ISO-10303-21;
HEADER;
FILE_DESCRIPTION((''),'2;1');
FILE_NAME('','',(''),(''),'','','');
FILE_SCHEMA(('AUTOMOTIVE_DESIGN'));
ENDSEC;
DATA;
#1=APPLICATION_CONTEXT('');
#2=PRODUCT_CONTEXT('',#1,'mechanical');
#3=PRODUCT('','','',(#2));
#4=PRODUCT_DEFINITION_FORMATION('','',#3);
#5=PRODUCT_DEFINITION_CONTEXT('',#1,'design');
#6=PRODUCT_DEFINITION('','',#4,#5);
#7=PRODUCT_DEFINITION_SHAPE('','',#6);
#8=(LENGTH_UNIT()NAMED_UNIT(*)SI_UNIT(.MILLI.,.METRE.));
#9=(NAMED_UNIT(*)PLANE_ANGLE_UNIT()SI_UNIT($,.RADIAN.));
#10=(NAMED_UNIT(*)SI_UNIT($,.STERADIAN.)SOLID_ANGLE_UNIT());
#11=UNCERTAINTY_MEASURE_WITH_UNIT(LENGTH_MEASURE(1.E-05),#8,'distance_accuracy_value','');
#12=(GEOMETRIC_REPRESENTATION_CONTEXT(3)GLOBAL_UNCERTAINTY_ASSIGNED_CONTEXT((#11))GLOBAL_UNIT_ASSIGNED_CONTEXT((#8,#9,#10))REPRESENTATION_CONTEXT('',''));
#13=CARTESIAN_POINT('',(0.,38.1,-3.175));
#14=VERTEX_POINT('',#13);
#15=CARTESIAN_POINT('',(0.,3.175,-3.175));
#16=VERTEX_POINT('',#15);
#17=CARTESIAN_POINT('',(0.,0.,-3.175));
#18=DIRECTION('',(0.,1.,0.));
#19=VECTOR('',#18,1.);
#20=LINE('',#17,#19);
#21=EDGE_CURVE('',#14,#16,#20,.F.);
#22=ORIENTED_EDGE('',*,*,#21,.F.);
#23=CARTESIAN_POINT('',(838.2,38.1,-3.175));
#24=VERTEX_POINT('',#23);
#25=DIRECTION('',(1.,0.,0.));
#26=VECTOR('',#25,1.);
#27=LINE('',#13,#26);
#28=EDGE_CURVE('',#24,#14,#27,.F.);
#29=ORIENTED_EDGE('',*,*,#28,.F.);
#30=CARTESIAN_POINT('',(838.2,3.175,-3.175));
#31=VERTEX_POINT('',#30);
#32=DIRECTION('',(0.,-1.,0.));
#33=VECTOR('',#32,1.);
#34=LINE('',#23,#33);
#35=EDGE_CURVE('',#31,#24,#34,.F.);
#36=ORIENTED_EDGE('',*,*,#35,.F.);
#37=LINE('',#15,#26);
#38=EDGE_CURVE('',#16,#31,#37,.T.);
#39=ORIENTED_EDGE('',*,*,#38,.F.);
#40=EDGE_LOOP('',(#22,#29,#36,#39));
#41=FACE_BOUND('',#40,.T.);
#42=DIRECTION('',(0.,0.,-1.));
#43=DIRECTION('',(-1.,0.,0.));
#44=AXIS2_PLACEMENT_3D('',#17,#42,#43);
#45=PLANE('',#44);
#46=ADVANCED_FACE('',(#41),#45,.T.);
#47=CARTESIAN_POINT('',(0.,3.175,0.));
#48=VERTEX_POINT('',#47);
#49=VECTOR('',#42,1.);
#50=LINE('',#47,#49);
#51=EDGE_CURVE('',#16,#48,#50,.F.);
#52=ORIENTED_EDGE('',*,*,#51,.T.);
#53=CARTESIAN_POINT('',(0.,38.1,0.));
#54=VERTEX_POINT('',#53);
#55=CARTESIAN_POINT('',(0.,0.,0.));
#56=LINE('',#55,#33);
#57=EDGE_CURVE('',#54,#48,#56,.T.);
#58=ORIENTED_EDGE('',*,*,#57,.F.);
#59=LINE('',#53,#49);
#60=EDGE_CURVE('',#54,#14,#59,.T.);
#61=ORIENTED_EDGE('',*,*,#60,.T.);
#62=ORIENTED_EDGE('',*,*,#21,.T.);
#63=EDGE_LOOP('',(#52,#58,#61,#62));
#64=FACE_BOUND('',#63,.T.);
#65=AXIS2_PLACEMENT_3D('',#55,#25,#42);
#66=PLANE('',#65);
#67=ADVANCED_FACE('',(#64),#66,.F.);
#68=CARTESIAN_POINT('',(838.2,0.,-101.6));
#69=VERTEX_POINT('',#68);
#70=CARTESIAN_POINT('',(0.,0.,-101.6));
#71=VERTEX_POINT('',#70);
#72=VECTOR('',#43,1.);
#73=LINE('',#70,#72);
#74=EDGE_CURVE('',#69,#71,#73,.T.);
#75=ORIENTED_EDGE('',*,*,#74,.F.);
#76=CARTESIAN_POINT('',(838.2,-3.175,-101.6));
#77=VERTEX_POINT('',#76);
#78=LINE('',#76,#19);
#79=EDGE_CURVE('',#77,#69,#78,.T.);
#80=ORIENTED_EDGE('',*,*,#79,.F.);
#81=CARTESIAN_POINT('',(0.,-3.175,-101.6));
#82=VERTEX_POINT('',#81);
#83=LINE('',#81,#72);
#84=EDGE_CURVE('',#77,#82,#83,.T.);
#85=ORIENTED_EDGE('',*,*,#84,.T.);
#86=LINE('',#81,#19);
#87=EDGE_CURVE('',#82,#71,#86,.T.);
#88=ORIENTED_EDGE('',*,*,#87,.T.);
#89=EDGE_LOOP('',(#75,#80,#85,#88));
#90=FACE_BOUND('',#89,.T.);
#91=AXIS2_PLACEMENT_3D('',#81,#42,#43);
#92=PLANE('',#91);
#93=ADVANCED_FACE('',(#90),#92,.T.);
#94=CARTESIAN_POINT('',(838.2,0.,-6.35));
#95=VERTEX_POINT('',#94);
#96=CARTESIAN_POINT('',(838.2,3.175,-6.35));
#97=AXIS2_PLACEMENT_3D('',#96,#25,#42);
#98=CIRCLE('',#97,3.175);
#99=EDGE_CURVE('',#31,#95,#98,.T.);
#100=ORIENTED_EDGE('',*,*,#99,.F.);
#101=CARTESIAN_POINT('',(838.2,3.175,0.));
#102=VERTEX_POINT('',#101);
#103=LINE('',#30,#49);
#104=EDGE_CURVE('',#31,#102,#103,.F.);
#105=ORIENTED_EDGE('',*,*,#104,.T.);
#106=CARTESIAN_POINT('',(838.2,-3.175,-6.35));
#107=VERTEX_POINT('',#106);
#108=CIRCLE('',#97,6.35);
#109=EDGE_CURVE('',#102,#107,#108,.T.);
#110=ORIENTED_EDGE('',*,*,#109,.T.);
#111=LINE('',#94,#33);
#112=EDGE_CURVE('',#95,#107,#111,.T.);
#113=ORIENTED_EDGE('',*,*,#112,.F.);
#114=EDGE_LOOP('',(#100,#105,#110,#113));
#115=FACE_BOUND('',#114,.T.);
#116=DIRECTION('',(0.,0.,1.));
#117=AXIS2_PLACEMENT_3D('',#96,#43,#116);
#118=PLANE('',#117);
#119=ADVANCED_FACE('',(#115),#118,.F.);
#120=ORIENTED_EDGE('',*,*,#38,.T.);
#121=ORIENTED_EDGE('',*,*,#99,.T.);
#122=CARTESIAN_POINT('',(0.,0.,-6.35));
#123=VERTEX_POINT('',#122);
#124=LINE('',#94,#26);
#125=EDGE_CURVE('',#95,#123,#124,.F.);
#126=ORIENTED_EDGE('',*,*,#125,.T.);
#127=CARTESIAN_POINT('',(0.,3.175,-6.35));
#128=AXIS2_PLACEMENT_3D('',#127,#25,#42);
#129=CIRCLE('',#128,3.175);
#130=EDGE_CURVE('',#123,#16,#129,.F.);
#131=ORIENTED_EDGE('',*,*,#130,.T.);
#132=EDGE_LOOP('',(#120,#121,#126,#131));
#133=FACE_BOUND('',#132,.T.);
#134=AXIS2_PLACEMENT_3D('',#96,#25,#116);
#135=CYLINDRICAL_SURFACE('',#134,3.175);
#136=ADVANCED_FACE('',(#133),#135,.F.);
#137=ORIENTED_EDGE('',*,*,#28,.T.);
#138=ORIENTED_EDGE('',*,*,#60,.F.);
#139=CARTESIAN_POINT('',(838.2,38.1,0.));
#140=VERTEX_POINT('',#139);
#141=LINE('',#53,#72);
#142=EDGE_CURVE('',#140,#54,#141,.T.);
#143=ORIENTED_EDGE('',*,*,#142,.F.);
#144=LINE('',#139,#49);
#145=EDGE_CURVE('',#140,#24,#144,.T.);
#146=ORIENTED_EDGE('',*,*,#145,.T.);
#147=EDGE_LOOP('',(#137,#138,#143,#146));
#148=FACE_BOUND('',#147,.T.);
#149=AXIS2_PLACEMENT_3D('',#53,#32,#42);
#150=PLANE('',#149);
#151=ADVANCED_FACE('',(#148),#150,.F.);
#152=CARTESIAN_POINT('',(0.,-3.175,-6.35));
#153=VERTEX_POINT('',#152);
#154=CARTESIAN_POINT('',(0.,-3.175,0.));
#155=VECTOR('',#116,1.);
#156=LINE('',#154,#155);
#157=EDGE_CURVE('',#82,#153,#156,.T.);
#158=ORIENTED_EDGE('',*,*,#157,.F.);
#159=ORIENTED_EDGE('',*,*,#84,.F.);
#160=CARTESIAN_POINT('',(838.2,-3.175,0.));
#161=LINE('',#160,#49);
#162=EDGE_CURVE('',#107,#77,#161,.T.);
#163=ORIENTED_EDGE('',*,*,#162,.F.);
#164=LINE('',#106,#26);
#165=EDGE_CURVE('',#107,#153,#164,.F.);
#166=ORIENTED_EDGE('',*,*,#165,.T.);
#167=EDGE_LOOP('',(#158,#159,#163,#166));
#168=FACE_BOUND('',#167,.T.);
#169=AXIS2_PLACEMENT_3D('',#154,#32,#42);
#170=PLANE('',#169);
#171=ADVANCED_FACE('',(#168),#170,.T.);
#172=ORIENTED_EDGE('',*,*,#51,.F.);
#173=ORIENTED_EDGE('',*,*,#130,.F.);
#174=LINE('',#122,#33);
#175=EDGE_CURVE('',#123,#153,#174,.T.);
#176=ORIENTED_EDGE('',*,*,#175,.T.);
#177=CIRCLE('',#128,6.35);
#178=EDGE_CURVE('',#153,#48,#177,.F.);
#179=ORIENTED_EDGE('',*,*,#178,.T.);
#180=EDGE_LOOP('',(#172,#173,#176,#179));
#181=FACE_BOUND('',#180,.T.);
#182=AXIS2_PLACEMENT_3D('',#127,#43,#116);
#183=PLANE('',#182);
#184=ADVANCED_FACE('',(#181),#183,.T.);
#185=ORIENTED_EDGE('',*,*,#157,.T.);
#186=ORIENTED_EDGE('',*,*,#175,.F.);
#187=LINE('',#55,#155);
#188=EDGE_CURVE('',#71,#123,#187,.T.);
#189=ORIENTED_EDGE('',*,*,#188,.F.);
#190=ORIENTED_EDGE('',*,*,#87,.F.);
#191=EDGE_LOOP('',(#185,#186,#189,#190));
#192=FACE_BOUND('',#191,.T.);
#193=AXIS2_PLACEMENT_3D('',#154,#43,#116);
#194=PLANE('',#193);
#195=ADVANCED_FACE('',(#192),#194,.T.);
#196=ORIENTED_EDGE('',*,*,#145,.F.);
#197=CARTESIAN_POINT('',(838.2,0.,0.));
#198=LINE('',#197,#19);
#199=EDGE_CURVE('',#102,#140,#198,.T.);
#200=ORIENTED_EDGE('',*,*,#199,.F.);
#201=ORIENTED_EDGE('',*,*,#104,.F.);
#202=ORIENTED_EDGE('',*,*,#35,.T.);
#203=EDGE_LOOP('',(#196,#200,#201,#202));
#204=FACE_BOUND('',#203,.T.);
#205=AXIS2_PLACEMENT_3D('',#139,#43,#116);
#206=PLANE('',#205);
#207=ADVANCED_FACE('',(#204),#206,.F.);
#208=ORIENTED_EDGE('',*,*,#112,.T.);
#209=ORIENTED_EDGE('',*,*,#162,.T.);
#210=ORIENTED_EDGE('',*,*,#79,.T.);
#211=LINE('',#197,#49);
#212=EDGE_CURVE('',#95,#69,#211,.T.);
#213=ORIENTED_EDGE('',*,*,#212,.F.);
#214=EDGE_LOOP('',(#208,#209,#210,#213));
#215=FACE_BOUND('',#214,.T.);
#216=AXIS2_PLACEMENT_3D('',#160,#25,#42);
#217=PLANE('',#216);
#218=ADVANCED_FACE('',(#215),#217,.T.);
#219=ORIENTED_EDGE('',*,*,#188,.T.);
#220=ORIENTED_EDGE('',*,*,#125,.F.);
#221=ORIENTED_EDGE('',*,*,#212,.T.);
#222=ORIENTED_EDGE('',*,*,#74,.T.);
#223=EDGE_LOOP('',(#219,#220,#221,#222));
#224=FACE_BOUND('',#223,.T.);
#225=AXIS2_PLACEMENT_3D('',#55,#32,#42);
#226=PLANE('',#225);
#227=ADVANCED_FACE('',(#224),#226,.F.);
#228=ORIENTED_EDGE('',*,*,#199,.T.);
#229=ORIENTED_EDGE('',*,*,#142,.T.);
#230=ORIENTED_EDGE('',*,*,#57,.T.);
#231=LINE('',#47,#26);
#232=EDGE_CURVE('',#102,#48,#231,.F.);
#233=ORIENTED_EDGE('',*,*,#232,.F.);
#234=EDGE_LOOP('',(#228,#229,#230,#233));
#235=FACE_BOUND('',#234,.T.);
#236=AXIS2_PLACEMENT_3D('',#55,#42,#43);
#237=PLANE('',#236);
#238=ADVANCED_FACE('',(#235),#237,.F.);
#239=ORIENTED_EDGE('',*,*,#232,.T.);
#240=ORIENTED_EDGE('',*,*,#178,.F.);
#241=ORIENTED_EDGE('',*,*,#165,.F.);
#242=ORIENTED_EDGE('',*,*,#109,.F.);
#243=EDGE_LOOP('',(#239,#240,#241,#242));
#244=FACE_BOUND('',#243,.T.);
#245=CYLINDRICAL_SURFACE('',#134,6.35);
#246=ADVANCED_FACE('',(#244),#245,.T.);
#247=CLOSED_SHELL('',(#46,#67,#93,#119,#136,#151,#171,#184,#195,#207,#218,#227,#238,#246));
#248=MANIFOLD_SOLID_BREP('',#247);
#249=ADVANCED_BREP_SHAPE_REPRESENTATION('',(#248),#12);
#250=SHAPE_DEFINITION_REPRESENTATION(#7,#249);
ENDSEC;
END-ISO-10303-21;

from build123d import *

# Parameters (mm, degrees)
SKETCH1_W                    = 838.2
SKETCH1_H                    = 101.6
BASE_FLANGE1_DEPTH           = 3.175
EDGE_FLANGE1_STRIP_W         = 19.05
EDGE_FLANGE1_STRIP_H         = 3.175
EDGE_FLANGE1_STRIP_CUT_DEPTH = 838.2
EDGE_FLANGE1_DEPTH           = 838.2


# Sheet-metal steps are written as plain solids
with BuildPart() as part:
    # Sketch1 → Base-Flange1 (new body)
    with BuildSketch(Plane(origin=(0, 0, 0), x_dir=(1, 0, 0), z_dir=(0, 1, 0))):
        with Locations((419.1, 50.8)):
            Rectangle(SKETCH1_W, SKETCH1_H)
    extrude(amount=-BASE_FLANGE1_DEPTH)

    # Edge-Flange1 strip (across the edge) → Edge-Flange1 strip cut (cut)
    with BuildSketch(Plane(origin=(0, 0, 0), x_dir=(0, 0, -1), z_dir=(1, 0, 0))):
        with Locations((-3.175, -1.5875)):
            Rectangle(EDGE_FLANGE1_STRIP_W, EDGE_FLANGE1_STRIP_H)
    extrude(amount=EDGE_FLANGE1_STRIP_CUT_DEPTH, mode=Mode.SUBTRACT)

    # Edge-Flange1 section (across the edge) → Edge-Flange1 (add)
    with BuildSketch(Plane(origin=(0, 0, 0), x_dir=(0, 0, -1), z_dir=(1, 0, 0))):
        with BuildLine():
            Line((0, 3.175), (0, 38.1))
            Line((0, 38.1), (3.175, 38.1))
            Line((3.175, 38.1), (3.175, 3.175))
            ThreePointArc((3.175, 3.175), (4.10493597, 0.92993597), (6.35, 0))
            Line((6.35, 0), (6.35, -3.175))
            ThreePointArc((6.35, -3.175), (1.859871939, -1.315128061), (0, 3.175))
        make_face()
    extrude(amount=EDGE_FLANGE1_DEPTH)


solid = part.part
